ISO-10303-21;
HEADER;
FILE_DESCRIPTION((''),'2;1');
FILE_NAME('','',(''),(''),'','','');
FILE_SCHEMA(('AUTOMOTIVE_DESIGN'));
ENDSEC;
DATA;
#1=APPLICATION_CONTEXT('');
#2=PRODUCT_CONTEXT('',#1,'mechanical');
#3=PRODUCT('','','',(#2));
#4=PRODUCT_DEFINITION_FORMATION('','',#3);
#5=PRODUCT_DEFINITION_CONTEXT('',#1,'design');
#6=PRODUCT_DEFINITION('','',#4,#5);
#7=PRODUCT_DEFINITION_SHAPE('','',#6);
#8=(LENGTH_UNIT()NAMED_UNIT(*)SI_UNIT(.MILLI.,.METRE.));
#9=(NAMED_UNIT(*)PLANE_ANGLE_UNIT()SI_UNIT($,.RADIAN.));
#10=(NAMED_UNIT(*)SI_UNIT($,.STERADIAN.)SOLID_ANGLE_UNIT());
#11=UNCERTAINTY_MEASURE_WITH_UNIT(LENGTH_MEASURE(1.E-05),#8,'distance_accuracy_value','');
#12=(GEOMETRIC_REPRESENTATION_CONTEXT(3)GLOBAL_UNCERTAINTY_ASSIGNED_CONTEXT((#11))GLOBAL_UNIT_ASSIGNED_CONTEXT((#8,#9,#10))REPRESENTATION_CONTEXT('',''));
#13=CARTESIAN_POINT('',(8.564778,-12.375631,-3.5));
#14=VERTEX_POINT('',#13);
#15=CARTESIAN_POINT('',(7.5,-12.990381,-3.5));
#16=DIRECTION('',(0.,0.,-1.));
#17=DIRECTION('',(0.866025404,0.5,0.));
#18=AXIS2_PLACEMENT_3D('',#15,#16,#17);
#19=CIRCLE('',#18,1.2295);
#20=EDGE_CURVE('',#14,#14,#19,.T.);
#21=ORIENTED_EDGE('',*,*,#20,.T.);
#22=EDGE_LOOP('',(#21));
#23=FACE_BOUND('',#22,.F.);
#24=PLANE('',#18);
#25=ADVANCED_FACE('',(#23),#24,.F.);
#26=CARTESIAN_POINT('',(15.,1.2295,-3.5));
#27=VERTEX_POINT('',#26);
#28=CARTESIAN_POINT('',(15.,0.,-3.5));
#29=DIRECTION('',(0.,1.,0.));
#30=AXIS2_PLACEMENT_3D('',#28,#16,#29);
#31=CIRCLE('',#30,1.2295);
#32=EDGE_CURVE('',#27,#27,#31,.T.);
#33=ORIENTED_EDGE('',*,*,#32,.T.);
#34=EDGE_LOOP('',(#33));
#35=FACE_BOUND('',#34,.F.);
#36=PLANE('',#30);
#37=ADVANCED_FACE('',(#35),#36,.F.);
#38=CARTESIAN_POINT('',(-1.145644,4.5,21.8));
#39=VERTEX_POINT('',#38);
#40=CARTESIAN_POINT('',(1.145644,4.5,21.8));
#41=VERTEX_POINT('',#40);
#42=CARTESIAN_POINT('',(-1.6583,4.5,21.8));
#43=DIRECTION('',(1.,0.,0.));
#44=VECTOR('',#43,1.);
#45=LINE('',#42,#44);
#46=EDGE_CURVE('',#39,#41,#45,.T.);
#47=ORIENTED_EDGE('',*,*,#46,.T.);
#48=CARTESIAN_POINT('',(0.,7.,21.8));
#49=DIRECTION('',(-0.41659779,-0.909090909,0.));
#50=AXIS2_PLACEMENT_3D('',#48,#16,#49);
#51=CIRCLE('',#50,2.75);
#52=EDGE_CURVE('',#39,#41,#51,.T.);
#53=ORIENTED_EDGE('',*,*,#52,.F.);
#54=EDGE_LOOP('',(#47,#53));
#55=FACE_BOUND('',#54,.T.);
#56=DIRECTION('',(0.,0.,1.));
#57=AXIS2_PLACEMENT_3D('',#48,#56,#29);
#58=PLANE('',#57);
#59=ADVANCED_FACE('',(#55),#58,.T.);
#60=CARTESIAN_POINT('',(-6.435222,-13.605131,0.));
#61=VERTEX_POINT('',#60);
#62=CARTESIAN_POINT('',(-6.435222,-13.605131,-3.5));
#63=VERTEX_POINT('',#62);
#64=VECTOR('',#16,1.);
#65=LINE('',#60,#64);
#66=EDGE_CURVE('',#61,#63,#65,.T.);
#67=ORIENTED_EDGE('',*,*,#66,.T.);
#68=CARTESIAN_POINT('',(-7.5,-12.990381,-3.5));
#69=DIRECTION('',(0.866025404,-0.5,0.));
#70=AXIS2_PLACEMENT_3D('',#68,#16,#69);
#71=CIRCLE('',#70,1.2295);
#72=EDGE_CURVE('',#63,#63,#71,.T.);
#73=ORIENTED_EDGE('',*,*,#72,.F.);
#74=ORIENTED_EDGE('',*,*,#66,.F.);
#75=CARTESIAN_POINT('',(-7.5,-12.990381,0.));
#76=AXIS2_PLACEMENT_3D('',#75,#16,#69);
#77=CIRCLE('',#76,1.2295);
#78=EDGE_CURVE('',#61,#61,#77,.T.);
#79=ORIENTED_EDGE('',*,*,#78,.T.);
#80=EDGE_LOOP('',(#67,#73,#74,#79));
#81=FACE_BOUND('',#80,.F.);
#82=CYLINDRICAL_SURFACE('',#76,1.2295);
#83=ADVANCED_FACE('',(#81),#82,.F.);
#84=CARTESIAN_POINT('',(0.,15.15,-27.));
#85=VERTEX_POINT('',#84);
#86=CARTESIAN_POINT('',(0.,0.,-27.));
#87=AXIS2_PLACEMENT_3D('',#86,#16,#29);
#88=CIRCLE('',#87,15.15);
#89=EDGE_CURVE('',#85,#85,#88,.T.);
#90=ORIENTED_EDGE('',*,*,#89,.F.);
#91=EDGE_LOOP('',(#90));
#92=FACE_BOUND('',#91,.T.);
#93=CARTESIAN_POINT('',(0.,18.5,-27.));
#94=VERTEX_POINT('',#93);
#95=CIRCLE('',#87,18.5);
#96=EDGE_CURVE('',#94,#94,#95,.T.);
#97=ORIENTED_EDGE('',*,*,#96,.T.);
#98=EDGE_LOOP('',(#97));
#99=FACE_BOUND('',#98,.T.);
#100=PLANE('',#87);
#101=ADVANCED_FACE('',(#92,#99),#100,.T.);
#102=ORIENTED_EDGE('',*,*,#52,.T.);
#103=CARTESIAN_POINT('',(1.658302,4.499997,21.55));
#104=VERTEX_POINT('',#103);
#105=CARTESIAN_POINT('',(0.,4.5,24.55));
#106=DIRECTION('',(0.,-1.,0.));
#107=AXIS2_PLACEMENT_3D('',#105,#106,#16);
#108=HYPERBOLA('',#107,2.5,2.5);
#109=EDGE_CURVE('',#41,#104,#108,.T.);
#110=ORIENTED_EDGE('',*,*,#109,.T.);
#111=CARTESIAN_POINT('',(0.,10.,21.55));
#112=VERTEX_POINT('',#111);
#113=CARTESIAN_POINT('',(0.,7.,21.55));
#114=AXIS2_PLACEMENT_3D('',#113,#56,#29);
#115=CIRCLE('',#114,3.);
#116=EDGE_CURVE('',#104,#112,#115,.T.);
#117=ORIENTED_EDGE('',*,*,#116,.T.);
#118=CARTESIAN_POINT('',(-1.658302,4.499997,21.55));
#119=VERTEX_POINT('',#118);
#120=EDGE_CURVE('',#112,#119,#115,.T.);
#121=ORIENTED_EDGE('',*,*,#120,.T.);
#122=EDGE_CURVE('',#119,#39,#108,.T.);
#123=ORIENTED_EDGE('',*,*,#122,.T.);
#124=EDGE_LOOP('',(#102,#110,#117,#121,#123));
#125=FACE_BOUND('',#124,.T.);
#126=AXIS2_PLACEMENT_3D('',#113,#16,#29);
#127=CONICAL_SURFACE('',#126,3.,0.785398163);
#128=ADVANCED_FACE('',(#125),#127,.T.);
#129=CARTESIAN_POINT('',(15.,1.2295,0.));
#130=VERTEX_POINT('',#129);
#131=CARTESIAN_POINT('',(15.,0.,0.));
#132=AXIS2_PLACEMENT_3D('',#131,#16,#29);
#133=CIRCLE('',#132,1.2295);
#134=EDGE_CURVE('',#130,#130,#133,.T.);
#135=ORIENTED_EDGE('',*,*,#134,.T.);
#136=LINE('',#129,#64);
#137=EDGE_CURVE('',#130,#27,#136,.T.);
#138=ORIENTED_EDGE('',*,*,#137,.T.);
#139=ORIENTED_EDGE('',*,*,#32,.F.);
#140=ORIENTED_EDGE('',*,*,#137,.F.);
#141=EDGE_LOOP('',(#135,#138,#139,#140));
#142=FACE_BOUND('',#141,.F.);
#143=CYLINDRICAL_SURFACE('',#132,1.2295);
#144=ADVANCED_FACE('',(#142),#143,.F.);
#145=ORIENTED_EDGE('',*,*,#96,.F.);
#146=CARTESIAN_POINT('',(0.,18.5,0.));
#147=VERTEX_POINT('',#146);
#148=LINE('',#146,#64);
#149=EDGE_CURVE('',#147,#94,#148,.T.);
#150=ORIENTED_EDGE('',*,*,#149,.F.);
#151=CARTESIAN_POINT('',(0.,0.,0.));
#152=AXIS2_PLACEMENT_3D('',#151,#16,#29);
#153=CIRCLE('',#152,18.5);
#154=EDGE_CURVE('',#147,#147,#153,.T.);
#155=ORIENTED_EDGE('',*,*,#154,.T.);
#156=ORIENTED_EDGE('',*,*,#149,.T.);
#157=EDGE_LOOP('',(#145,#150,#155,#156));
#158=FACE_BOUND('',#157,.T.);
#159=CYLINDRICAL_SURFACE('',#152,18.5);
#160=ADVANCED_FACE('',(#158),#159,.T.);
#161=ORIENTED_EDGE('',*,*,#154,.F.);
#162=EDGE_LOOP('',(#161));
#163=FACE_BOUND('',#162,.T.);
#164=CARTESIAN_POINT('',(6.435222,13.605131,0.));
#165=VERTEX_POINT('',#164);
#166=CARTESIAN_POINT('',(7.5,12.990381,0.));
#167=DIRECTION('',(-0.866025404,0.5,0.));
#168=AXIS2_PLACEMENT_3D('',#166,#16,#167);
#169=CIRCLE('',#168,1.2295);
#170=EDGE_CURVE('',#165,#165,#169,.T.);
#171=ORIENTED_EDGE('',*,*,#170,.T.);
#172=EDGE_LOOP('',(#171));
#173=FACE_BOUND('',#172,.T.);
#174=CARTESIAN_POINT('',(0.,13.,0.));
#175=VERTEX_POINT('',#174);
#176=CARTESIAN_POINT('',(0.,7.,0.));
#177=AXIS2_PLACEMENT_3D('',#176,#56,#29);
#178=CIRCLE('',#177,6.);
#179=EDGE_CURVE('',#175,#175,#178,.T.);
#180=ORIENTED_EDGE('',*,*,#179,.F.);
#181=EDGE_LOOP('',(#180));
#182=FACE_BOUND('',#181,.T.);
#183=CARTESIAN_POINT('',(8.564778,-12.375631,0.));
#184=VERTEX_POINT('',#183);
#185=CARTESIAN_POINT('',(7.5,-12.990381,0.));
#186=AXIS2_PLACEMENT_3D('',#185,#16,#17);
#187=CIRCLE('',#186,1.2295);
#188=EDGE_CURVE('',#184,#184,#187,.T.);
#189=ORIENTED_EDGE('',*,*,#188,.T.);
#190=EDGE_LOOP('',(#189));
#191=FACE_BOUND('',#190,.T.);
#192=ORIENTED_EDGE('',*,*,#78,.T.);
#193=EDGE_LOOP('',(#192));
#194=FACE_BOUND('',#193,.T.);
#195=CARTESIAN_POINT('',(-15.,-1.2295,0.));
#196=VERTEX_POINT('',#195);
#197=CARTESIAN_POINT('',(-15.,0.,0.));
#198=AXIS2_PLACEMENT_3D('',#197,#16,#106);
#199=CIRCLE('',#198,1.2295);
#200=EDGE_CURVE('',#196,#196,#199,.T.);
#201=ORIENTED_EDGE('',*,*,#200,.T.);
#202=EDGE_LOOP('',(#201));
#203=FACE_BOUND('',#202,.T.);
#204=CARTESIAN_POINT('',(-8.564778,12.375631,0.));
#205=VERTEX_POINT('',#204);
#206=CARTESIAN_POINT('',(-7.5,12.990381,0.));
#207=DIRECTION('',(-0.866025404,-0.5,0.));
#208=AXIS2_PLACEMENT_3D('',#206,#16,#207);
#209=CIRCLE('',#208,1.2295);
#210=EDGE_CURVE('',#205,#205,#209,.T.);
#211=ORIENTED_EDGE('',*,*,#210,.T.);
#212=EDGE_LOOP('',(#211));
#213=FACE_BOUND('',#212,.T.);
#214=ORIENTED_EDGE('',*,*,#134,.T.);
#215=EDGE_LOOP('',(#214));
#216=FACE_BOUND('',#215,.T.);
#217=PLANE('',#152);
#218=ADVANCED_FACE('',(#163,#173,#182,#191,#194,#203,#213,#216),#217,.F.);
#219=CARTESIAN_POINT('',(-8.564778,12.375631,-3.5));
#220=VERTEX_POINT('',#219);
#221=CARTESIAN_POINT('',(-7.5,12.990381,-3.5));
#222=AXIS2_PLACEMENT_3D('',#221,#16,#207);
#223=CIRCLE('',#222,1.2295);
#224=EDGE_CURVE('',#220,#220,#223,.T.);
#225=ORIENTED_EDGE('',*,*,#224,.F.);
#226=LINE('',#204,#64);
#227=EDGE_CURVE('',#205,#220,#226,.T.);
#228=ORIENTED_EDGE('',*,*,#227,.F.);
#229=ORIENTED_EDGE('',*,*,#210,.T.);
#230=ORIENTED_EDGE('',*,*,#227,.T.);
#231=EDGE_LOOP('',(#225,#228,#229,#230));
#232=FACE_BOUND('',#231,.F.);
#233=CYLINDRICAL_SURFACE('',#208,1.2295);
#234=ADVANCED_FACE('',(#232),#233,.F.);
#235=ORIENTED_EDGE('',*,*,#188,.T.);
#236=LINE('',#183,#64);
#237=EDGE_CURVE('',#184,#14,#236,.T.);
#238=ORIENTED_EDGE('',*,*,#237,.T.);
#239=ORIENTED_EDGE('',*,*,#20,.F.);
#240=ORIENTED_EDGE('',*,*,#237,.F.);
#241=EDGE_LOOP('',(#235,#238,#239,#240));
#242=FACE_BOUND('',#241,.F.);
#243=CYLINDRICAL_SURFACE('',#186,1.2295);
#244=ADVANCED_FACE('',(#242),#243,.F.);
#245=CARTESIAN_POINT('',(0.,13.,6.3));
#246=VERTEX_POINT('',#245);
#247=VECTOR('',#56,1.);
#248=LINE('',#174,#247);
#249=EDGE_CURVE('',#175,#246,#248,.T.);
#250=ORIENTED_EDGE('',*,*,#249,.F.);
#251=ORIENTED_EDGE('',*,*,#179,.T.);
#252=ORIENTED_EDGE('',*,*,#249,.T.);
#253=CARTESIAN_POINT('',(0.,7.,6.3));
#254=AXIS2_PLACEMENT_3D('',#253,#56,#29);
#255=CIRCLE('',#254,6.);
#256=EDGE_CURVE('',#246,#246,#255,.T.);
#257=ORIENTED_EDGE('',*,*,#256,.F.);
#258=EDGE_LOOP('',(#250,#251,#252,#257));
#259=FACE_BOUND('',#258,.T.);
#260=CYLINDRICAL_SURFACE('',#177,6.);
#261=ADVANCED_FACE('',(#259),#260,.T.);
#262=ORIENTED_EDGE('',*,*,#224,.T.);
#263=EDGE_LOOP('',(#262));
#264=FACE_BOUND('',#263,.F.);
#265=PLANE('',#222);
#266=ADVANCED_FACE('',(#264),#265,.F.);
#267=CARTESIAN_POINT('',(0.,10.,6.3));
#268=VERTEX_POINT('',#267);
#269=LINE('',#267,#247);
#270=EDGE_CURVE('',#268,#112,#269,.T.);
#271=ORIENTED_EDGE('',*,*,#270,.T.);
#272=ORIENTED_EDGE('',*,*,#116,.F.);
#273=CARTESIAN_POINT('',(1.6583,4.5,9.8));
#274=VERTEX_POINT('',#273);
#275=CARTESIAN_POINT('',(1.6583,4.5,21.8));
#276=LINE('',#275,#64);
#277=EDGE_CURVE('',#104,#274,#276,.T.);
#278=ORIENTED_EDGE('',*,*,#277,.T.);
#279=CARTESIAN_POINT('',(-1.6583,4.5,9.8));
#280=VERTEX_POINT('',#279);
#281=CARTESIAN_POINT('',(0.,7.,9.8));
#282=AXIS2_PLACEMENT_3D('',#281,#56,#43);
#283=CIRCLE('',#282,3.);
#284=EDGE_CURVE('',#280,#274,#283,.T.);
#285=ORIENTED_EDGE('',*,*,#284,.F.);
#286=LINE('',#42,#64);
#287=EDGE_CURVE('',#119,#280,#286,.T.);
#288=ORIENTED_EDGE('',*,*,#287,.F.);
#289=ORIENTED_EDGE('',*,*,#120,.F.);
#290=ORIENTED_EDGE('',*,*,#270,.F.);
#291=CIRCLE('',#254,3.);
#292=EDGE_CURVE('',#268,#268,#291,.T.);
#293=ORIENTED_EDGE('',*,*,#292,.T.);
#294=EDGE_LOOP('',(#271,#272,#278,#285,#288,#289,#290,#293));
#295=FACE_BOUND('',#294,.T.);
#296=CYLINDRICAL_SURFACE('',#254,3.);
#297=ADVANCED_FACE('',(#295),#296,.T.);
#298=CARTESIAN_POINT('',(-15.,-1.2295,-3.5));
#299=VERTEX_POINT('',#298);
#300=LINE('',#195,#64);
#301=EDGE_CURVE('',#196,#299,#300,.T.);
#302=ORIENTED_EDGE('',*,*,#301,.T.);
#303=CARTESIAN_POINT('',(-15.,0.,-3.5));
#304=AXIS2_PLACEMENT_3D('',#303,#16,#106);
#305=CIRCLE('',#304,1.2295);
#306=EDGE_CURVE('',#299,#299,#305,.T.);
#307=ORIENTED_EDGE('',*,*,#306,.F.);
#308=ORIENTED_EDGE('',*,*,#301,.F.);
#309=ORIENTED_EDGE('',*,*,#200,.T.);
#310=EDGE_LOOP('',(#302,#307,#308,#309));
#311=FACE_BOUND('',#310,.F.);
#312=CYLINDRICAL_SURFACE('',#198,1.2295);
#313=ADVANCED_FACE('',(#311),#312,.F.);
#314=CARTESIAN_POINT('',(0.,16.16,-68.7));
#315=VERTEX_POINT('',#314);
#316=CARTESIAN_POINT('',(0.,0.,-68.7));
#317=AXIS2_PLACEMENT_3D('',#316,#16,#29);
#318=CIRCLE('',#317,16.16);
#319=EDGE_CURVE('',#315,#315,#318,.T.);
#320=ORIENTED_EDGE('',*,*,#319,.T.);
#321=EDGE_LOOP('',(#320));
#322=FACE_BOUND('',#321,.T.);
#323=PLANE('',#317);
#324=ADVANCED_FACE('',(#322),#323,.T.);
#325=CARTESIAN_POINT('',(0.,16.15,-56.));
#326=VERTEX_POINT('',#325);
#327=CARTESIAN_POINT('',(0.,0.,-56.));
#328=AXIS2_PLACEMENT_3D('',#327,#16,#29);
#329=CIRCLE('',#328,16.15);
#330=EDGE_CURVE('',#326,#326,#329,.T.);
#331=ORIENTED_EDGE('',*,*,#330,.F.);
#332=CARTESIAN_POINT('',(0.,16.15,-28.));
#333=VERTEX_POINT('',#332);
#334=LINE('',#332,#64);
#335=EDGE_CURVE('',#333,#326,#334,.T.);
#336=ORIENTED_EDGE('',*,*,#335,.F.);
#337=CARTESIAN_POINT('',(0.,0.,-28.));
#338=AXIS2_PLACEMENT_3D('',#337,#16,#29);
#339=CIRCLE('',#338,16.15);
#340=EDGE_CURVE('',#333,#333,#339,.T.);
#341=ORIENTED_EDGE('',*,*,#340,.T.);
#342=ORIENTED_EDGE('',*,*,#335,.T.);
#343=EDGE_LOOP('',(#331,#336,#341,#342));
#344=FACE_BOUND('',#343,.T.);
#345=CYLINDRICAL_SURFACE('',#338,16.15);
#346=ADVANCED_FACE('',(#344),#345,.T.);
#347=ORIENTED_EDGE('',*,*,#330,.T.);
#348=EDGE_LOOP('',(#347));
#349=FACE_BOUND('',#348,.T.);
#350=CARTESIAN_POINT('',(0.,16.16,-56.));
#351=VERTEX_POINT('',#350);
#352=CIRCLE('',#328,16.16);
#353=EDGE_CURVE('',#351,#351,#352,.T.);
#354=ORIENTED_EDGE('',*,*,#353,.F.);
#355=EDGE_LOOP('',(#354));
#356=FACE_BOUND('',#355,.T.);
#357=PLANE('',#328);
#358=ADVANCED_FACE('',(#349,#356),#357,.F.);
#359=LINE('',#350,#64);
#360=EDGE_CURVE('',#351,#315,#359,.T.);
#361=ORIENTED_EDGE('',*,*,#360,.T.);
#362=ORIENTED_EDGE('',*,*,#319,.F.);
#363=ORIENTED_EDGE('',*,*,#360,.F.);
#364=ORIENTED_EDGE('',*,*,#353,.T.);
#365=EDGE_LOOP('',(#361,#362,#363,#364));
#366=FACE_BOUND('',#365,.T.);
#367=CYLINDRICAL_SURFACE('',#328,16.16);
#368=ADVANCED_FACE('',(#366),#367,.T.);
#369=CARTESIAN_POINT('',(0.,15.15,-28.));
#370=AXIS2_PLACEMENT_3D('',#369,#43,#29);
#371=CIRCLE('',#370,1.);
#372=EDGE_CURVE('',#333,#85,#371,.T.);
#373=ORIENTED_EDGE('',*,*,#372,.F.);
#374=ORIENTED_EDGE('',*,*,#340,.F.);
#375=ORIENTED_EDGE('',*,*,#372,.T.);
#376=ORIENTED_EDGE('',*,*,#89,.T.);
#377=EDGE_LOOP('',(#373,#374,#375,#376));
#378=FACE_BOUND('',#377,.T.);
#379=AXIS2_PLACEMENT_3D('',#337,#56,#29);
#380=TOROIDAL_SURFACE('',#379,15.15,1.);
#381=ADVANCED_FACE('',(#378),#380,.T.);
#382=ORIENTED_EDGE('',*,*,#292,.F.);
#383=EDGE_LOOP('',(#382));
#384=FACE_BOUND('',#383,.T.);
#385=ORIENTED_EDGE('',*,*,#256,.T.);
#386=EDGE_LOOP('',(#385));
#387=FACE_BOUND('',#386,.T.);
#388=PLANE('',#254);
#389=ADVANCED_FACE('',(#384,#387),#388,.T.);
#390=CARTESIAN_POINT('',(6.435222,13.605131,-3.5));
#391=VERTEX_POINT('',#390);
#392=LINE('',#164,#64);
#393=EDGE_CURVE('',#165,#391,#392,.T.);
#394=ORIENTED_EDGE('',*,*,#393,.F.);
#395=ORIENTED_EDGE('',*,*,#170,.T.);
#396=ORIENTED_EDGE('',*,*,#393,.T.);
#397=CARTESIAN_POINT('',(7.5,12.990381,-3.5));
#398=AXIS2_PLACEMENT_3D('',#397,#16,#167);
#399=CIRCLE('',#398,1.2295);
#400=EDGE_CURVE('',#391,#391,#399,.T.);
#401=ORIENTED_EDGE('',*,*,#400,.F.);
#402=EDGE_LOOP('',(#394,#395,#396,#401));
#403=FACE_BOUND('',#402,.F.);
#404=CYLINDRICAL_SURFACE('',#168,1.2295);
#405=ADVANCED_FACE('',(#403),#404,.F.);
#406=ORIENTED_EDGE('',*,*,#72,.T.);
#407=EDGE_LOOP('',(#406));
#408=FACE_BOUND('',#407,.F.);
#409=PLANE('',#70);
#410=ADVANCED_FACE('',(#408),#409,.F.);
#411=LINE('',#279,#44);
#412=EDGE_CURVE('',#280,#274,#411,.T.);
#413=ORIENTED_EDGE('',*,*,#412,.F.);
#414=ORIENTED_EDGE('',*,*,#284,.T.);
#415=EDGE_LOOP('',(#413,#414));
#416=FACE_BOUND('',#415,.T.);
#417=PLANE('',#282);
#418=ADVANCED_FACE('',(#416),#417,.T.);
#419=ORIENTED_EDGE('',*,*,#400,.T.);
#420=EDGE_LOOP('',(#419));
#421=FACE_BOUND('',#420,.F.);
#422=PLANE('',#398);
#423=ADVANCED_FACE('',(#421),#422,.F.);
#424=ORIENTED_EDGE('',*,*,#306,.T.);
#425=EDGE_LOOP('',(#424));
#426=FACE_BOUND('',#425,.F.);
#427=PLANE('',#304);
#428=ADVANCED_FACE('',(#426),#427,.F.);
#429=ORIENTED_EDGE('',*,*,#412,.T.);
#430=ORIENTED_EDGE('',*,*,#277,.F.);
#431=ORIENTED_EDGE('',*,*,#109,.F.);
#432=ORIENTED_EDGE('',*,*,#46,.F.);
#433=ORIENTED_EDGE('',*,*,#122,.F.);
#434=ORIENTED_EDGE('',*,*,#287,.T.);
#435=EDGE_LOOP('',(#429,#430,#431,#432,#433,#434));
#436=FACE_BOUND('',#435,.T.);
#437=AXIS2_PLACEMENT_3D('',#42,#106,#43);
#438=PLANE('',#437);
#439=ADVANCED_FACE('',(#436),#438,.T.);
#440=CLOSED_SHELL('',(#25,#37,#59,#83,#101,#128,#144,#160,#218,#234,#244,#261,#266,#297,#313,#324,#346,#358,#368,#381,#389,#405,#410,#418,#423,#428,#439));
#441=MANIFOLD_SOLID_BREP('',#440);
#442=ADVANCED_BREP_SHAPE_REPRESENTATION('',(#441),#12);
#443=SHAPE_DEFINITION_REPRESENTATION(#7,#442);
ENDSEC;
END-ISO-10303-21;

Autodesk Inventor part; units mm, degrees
ref_plane "YZ Plane" through (0, 0, 0) normal (1, 0, 0) x (0, 1, 0)
ref_plane "XZ Plane" through (0, 0, 0) normal (0, 1, 0) x (-1, 0, 0)
ref_plane "XY Plane" through (0, 0, 0) normal (0, 0, 1) x (1, 0, 0)
sketch "Sketch2" plane through (0, 0, 0) normal (1, 0, 0) x (0, 1, 0)
  line L0 (0, 0) -> (0, -90.5559) construction
  line L1 (0, 0) -> (18.5, 0)
  line L2 (18.5, 0) -> (18.5, -27)
  line L3 (18.5, -27) -> (0, -27)
  line L4 (0, -27) -> (0, 0)
  line L5 (0, -27) -> (16.15, -27)
  line L6 (16.15, -28) -> (16.15, -56)
  line L7 (16.15, -56) -> (0, -56)
  line L8 (0, -56) -> (0, -27)
  line L9 (0, -56) -> (16.16, -56)
  line L10 (16.16, -56) -> (16.16, -68.7)
  line L11 (16.16, -68.7) -> (0, -68.7)
  line L12 (0, -68.7) -> (0, -56)
  arc A0 (16.15, -28) -> (15.15, -27) centre (15.15, -28) ccw
  line L13 (16.15, -28) -> (15.15, -28) construction
  line L14 (15.15, -27) -> (15.15, -28) construction
  dimension "d1" = 27
  dimension "d3" = 41.7
  dimension "d4" = 37
  dimension "d5" = 0.01
  dimension "d6" = 2.35
  dimension "d7" = 29
  dimension "d8" = 1
  dimension "d9" = 90
revolve "Revolution1" add sketch "Sketch2" angle 360 about axis through (0, 0, 0) along (0, 0, -1)
sketch "Sketch4" plane through (0, 0, 0) normal (1, 0, 0) x (0, 1, 0)
  line L0 (7, 0) -> (7, 36.4313)
  line L1 (7, 0) -> (0, 0)
  line L2 (-18.5, 0) -> (18.5, 0) projected
  line L3 (7, 0) -> (13, 0)
  line L4 (13, 0) -> (13, 6.3)
  line L5 (13, 6.3) -> (7, 6.3)
  line L6 (7, 6.3) -> (7, 0)
  line L7 (7, 6.3) -> (10, 6.3)
  line L8 (10, 6.3) -> (10, 21.8)
  line L9 (10, 21.8) -> (7, 21.8)
  line L10 (7, 21.8) -> (7, 6.3)
  dimension "d12" = 7
  dimension "d13" = 6.3
  dimension "d14" = 12
  dimension "d15" = 15.5
  dimension "d16" = 6
revolve "Revolution2" add sketch "Sketch4" angle 360 about axis through (0, 7, 0) along (0, 0, 1)
chamfer "Chamfer1" distance 0.25 angle 45 1 edges at (0, 4, 21.8)
sketch "Sketch5" plane through (0, 7, 21.8) normal (0, 0, 1) x (1, 0, 0)
  circle A0 centre (0, 0) radius 3 projected
  line L0 (-1.6583, -2.5) -> (1.6583, -2.5)
  point P0 (0, -7)
  point P1 (0, 3)
  dimension "d18" = 5.5
extrude "Extrusion1" cut sketch "Sketch5" against normal blind 12 contours L0 A0 picked at (-0.3442, -2.6056)
sketch "Sketch6" plane through (0, 0, 0) normal (0, 0, 1) x (1, 0, 0)
  point P0 (0, 0)
  point P1 (-15, 0)
  dimension "d24" = 15
hole "Hole1" at (-15, 0, 0) direction (0, 0, -1) diameter 2.459 depth 3.5 thread size "M3x0.5" class "6H" standard "ISO Metric profile"
pattern_circular "Circular Pattern1" count 6 over 360 about axis through (0, 0, -13.5) along (0, 0, -1) of "Hole1"
equation "\"BendRadius\" = Thickness"
equation "\"BendReliefWidth\" = Thickness"
equation "\"BendReliefDepth\" = 0.5 * Thickness"
equation "\"CornerReliefSize\" = 4 * Thickness"
equation "\"MinimumRemnant\" = 2 * Thickness"
equation "\"TransitionRadius\" = BendRadius"
equation "\"JacobiRadiusSize\" = BendRadius"
equation "\"GapSize\" = Thickness"
equation "\"Thickness\" = 3.048"
properties part number "Vince-Motor"
